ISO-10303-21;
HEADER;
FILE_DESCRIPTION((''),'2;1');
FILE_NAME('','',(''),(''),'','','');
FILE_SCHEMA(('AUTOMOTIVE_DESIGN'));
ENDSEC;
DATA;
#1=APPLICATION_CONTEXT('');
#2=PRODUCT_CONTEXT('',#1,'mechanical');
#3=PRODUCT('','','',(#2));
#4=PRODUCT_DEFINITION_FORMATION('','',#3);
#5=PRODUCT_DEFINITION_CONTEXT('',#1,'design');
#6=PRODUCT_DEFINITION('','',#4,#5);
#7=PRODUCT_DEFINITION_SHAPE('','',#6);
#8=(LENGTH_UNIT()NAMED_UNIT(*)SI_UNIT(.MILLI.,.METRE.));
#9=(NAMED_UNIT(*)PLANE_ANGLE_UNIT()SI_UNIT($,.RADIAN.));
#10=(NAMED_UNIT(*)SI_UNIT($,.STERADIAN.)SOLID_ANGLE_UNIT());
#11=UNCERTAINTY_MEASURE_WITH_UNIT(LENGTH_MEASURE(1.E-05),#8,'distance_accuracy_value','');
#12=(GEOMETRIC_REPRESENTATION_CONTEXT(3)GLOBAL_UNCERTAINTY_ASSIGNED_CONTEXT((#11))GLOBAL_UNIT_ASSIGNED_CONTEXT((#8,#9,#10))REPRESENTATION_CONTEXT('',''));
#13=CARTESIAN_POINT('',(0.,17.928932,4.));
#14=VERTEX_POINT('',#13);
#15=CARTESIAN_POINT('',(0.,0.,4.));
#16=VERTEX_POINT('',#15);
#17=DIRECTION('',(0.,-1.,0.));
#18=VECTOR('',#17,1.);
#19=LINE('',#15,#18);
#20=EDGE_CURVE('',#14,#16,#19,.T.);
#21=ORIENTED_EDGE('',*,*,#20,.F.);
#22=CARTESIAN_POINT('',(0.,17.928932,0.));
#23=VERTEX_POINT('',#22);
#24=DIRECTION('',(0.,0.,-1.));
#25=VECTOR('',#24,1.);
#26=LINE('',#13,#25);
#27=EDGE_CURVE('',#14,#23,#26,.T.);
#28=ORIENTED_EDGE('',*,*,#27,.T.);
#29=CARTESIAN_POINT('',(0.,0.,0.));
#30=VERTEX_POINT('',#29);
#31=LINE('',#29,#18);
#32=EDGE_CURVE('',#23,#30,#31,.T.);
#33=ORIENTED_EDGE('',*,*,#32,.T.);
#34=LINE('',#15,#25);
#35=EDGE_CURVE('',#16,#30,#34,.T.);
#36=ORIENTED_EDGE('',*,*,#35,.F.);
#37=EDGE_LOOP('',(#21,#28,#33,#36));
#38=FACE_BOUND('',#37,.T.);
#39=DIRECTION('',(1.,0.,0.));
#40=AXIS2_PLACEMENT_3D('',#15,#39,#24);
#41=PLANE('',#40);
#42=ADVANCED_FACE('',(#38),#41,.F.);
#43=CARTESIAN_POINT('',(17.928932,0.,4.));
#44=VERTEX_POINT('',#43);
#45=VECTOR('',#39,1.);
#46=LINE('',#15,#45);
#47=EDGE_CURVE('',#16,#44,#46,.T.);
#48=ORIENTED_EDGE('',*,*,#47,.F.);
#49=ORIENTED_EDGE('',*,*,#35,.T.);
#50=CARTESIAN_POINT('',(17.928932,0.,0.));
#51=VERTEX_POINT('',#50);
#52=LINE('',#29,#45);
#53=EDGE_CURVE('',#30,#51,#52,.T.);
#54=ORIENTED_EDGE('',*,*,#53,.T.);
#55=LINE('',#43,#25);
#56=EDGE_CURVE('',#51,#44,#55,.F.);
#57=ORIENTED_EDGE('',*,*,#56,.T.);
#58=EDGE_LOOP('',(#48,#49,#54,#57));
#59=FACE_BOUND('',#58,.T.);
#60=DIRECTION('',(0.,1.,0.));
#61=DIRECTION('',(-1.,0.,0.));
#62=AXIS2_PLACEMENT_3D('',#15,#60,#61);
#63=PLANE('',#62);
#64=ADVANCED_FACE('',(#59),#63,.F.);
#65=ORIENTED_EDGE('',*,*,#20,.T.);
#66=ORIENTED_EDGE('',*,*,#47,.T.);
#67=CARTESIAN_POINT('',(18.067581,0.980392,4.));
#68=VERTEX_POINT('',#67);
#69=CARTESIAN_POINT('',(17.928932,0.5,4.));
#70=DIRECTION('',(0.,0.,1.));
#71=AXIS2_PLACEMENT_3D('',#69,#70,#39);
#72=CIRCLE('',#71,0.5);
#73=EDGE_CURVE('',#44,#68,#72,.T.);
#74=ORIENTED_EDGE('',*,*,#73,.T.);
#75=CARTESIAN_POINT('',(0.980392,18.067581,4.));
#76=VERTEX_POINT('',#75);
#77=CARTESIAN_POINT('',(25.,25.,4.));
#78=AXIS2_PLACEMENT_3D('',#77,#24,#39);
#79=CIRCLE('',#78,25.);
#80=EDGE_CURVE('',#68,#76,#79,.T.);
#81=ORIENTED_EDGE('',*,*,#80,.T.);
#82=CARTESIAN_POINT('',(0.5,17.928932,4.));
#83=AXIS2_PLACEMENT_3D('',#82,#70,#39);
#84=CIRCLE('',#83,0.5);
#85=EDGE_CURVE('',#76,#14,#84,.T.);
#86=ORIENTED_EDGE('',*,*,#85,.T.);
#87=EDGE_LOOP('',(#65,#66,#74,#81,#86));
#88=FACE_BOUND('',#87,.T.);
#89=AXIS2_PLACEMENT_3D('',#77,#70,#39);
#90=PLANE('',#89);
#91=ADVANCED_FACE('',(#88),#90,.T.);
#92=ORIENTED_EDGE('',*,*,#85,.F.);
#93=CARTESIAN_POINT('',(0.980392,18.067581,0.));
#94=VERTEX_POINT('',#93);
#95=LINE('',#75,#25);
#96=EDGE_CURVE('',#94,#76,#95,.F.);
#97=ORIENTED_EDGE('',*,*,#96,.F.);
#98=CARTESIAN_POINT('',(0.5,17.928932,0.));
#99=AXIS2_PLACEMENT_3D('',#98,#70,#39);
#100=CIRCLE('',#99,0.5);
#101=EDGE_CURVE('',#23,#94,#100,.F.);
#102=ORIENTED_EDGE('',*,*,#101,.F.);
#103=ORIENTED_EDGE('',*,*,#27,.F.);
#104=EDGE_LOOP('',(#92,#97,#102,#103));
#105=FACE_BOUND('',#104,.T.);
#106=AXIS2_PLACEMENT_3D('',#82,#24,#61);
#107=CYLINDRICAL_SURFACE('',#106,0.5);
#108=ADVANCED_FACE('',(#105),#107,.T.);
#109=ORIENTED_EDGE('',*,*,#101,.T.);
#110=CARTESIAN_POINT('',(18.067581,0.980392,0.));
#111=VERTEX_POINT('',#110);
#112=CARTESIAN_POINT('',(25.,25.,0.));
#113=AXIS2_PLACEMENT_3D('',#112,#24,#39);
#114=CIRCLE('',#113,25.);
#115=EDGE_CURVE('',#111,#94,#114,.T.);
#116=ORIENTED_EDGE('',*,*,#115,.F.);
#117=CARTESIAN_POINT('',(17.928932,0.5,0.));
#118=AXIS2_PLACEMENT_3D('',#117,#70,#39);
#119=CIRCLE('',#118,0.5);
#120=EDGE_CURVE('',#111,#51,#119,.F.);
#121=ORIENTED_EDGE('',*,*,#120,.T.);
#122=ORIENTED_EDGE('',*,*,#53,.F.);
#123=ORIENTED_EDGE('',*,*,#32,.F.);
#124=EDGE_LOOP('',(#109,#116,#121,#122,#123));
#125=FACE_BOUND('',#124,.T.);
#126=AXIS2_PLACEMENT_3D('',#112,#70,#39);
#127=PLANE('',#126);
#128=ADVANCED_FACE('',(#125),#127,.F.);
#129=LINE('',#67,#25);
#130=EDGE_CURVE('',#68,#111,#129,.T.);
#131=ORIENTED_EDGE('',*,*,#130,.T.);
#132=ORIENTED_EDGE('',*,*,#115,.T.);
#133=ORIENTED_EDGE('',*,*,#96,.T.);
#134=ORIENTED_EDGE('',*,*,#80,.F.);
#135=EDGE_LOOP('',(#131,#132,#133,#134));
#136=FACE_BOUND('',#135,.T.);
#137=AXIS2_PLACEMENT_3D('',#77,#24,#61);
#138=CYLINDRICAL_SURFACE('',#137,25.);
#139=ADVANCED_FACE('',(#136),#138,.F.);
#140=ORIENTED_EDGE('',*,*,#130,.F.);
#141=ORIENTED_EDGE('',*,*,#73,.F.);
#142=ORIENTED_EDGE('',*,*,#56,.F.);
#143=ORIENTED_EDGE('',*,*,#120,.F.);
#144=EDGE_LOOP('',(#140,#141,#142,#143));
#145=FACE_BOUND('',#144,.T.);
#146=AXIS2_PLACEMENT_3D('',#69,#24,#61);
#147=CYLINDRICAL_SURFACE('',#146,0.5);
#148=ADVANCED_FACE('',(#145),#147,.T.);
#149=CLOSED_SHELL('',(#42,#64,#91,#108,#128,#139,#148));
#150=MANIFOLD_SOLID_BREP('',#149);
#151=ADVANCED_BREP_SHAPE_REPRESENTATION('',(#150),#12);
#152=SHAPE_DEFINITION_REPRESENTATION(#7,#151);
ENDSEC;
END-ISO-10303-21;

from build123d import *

# Parameters (mm, degrees)
AUFSATZ_LINEAR_AUSTRAGEN1_DEPTH = 4
VERRUNDUNG1_R                   = 0.5


with BuildPart() as part:
    # Skizze1 → Aufsatz-Linear austragen1 (new body)
    with BuildSketch(Plane.XY):
        with BuildLine():
            Line((0, 0), (25, 1.53e-15))
            ThreePointArc((25, 1.53e-15), (7.322330470336308, 7.322330470336315), (0, 25))
            Line((0, 25), (0, 0))
        make_face()
    extrude(amount=AUFSATZ_LINEAR_AUSTRAGEN1_DEPTH)

    # Verrundung1
    verrundung1_edges = [part.edges().sort_by_distance(p)[0] for p in [
        (0, 25, 2),
        (25, -1.01e-15, 2),
    ]]
    fillet(verrundung1_edges, radius=VERRUNDUNG1_R - 0.0001)  # a hair under: the kernel refuses the full size


solid = part.part
